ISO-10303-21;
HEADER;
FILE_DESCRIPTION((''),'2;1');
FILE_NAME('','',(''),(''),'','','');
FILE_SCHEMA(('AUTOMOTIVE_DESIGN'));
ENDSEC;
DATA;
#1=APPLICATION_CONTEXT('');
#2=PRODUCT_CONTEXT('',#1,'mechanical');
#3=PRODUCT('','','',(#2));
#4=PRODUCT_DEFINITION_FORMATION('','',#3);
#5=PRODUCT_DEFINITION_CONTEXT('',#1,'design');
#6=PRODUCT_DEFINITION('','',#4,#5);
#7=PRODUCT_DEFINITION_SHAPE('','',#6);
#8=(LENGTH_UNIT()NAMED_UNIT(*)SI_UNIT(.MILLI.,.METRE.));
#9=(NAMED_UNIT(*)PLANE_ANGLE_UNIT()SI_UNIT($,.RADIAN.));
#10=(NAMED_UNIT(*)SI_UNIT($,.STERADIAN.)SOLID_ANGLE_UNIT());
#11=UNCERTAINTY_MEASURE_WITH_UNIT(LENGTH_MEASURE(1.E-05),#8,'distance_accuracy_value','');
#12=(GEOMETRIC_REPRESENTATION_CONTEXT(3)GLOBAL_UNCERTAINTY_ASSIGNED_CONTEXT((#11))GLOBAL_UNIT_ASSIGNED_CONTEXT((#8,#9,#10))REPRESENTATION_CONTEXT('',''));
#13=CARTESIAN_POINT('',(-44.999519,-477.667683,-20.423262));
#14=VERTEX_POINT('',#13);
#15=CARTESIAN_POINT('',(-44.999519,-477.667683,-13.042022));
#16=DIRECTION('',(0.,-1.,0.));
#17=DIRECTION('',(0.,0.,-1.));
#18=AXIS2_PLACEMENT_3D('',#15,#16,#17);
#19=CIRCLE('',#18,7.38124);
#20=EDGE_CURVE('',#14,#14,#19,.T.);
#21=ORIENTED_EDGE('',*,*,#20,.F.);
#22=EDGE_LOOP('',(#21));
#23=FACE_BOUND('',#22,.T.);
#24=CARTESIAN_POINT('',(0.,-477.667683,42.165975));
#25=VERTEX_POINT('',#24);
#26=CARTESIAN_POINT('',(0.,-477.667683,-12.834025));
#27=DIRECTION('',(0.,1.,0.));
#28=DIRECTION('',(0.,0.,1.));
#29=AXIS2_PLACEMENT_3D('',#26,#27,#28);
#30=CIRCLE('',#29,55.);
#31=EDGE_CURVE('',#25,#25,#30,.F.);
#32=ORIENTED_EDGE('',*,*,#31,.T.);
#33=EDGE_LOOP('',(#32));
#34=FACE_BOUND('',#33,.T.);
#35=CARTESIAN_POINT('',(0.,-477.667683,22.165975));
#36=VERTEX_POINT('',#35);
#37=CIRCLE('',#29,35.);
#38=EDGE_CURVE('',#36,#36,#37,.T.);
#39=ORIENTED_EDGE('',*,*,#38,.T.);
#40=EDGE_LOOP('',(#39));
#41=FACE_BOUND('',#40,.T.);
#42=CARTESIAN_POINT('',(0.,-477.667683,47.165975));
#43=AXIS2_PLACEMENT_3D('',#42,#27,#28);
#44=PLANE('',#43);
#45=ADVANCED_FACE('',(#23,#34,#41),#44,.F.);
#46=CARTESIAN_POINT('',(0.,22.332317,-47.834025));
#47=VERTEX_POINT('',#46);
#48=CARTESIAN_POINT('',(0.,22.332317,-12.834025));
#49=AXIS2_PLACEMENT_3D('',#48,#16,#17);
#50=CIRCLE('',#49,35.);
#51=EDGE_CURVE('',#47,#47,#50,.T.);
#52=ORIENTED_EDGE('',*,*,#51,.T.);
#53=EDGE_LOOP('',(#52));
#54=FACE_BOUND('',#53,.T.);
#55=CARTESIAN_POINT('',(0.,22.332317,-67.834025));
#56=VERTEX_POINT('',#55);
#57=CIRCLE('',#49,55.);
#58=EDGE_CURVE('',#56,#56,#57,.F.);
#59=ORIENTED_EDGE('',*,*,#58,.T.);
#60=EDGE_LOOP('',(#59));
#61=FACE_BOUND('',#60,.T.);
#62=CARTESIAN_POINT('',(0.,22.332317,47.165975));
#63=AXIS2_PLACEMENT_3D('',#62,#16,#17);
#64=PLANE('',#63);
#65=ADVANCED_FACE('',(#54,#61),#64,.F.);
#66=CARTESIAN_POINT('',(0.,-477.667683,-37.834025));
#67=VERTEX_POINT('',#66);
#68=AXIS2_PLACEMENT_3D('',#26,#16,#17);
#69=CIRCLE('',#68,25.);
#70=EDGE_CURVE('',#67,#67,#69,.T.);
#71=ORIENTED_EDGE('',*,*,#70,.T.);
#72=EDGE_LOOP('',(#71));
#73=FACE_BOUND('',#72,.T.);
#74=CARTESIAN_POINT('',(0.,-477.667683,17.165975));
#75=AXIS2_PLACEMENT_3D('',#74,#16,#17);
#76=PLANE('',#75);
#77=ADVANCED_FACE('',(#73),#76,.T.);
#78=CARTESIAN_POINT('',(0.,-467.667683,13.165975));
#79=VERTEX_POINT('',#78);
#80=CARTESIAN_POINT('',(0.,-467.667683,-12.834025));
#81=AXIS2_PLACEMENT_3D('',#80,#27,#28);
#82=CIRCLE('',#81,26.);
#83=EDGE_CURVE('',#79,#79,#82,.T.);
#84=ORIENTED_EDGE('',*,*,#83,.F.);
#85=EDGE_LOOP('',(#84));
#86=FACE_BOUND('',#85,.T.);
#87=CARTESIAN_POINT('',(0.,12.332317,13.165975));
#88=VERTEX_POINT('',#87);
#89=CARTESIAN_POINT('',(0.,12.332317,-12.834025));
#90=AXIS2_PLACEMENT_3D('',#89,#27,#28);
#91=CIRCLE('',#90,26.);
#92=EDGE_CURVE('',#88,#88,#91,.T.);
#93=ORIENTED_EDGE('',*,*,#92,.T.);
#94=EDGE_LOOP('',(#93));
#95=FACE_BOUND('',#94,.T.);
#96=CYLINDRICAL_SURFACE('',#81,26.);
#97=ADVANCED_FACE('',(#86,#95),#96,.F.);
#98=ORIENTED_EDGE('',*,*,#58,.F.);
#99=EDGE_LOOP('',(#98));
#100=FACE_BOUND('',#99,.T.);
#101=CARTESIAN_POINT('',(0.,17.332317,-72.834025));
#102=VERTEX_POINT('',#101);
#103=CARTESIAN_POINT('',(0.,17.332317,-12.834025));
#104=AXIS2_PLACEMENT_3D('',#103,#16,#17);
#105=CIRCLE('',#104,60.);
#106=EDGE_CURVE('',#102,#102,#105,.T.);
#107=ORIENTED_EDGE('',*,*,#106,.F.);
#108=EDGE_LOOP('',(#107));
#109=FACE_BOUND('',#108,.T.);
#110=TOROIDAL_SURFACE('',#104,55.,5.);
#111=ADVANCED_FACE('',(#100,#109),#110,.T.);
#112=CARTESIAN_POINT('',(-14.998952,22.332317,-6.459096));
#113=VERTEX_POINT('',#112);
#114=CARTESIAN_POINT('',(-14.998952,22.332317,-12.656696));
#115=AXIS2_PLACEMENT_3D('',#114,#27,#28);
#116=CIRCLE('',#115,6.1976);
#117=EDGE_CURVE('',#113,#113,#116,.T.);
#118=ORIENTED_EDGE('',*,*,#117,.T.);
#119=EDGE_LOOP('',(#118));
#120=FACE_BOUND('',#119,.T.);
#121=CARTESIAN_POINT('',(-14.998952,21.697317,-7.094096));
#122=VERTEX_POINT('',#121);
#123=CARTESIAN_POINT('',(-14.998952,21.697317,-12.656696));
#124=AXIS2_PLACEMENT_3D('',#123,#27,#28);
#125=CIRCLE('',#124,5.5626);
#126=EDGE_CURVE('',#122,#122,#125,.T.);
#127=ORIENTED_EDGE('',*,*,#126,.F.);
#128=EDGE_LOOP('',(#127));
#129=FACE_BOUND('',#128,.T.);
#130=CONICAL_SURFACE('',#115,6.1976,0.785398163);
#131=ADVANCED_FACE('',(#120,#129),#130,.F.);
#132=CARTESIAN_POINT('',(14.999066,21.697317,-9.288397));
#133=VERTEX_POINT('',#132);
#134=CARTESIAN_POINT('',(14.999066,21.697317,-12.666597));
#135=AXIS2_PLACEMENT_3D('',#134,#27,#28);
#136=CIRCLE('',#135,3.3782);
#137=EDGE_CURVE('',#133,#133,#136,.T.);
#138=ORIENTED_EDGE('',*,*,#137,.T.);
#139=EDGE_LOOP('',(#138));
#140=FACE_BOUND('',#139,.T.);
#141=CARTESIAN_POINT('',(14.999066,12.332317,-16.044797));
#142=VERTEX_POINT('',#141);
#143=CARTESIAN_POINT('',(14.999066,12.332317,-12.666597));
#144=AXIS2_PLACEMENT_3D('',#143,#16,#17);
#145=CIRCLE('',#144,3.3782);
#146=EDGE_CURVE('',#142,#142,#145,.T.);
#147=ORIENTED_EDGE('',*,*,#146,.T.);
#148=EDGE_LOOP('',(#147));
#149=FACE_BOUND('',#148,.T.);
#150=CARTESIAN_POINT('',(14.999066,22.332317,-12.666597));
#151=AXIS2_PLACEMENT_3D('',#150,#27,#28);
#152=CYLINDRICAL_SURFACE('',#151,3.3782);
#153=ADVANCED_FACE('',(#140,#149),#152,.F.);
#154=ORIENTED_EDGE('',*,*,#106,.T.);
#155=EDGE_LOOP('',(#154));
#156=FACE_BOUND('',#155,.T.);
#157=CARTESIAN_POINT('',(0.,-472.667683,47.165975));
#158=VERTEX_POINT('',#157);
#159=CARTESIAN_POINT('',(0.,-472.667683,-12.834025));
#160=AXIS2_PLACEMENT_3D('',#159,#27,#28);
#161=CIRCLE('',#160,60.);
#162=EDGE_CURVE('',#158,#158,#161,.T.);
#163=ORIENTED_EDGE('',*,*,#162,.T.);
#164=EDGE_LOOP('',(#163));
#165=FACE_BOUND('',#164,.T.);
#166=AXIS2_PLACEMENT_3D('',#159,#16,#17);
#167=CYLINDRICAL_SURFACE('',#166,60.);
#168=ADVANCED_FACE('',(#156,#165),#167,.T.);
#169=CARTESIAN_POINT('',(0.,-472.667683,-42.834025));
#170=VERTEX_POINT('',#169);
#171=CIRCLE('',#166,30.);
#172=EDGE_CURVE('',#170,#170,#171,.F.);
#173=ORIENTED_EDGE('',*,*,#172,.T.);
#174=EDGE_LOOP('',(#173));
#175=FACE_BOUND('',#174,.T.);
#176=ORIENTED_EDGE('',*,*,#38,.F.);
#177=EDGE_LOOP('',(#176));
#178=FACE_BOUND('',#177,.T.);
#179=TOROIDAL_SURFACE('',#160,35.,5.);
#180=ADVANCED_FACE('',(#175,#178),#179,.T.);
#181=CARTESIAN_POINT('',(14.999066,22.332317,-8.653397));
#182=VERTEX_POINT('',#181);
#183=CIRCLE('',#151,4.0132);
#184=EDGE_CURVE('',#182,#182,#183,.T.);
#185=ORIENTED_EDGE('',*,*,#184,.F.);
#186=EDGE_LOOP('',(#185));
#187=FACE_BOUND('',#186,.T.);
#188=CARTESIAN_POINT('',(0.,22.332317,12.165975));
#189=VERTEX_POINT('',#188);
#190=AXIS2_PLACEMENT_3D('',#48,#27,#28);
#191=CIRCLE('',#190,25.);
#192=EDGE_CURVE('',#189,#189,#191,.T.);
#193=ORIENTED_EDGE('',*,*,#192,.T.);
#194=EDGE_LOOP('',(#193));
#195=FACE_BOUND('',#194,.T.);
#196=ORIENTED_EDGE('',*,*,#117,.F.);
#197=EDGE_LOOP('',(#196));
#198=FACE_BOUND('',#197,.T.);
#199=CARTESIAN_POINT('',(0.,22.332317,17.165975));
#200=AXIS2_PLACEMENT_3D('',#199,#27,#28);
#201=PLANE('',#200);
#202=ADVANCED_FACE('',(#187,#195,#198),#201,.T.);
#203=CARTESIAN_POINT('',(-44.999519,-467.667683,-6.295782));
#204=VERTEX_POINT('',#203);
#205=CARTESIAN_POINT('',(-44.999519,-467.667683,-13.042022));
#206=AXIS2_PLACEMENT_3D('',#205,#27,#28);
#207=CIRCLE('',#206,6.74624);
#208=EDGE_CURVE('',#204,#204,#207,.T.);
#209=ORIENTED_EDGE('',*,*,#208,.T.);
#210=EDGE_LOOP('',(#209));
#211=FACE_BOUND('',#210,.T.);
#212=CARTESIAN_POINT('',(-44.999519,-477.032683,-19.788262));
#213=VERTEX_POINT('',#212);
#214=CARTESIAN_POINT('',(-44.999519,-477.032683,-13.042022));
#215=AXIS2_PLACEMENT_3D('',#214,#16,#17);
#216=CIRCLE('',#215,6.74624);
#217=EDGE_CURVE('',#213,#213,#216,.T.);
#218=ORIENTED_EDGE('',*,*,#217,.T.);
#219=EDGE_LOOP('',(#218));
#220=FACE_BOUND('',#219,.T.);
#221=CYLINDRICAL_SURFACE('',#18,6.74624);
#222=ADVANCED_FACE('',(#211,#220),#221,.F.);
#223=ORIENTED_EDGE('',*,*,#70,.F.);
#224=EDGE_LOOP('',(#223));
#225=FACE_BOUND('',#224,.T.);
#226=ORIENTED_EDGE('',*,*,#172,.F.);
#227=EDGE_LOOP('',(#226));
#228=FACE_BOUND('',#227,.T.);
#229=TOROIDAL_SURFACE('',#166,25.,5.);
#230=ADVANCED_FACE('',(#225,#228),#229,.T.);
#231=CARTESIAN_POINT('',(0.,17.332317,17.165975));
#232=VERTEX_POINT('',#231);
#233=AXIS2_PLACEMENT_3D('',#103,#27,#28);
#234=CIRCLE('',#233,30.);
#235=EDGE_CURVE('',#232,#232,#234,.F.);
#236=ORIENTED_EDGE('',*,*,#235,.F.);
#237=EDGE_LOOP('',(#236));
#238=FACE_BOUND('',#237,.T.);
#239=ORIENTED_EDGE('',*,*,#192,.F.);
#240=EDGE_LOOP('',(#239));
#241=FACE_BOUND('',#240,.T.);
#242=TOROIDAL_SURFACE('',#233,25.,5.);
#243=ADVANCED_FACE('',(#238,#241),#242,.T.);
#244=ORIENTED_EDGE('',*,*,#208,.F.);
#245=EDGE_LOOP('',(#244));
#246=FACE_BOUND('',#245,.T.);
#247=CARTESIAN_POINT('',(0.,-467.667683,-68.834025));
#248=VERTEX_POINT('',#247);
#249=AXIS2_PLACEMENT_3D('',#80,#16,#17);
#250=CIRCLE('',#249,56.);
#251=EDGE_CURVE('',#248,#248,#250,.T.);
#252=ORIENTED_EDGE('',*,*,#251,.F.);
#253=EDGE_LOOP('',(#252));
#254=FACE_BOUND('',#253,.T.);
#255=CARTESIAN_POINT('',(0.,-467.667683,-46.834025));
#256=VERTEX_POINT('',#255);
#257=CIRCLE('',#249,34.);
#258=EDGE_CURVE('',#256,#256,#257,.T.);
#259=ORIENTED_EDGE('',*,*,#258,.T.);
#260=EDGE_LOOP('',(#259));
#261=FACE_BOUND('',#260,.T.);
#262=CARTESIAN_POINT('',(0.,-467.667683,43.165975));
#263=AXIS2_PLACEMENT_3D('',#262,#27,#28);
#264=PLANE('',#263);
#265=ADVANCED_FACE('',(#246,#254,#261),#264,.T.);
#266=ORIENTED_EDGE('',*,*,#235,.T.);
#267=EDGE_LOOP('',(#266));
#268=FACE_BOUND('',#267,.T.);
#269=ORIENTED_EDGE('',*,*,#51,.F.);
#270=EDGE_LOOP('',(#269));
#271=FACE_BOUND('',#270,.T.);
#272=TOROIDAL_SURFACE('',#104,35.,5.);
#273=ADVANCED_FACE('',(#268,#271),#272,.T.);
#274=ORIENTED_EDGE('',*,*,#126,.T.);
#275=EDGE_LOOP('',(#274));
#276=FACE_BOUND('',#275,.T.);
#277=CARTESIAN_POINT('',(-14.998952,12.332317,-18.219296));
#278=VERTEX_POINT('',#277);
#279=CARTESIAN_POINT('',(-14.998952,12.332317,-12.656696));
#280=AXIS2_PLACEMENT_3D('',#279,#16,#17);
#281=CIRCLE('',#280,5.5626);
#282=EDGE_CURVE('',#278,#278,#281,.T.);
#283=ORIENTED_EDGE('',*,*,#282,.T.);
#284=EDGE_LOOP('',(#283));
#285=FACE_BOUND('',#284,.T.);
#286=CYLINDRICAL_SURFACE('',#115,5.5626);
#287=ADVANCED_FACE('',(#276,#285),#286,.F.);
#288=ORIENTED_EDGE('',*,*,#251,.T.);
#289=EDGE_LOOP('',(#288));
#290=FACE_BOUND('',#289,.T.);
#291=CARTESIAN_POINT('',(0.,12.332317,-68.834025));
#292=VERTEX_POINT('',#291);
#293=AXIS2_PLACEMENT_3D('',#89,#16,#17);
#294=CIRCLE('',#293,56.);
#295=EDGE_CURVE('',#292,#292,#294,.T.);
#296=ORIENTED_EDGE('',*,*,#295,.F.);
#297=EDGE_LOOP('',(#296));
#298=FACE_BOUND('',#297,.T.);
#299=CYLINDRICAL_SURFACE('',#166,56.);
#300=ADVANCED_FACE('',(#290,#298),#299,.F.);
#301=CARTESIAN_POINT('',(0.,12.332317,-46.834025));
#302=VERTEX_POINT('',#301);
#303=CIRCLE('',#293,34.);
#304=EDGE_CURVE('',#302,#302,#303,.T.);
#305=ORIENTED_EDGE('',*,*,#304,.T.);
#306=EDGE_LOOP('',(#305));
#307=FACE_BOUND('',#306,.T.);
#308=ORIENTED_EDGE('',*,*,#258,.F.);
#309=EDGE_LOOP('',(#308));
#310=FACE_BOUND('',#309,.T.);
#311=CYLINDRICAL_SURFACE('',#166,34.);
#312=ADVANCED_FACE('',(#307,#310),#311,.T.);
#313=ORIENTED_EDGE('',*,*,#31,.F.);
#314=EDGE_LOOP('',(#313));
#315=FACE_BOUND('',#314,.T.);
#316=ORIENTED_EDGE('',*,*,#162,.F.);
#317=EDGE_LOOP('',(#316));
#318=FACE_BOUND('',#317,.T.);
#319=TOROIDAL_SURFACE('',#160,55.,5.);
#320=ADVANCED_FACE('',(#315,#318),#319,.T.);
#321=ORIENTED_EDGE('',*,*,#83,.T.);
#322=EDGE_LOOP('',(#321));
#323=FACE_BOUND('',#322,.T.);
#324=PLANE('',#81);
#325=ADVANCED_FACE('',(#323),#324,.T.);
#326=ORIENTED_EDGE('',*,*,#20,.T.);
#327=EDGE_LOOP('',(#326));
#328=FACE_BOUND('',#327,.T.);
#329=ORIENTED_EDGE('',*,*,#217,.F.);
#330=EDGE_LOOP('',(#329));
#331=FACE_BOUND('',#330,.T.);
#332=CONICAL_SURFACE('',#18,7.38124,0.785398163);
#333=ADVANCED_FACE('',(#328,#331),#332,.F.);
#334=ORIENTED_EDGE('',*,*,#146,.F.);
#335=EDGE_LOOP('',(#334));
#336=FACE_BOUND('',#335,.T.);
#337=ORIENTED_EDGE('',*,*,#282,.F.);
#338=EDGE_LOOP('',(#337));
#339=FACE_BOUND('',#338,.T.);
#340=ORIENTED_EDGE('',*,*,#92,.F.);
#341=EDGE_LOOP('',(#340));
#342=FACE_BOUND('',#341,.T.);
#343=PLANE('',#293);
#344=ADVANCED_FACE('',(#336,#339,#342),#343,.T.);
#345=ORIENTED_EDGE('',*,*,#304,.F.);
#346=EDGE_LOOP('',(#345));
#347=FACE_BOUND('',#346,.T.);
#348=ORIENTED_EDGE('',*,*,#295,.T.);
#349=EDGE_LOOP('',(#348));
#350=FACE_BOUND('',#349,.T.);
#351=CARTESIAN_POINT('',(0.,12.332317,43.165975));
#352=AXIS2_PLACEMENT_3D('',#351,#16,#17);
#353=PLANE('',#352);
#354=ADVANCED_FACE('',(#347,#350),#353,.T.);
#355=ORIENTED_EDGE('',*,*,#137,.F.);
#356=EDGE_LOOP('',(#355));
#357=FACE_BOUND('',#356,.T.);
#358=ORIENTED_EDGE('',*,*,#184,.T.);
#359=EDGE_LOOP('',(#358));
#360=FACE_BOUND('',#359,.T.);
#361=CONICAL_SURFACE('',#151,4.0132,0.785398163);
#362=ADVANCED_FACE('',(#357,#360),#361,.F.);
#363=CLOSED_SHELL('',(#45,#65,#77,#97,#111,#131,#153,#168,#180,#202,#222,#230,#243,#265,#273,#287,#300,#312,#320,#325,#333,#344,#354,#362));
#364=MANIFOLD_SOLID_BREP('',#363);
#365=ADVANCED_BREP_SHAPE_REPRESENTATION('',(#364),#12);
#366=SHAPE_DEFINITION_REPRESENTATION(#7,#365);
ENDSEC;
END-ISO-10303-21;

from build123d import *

# Parameters (mm, degrees)
CONG_1_R                                            = 5
CONG_2_R                                            = 5
ESQUISSE3_W                                         = 30
ESQUISSE3_H                                         = 500
ESQUISSE3_W_2                                       = 22
ESQUISSE3_H_2                                       = 480
CONG_3_R                                            = 5
CONG_4_R                                            = 5
PER_AGE_POUR_TUYAU_POUR_TROU_TARAUD_1_4_D           = 11.1252
PER_AGE_POUR_TUYAU_POUR_TROU_TARAUD_1_4_DEPTH       = 10
PER_AGE_POUR_TUYAU_POUR_TROU_TARAUD_1_4_CSINK_D     = 12.3952
PER_AGE_POUR_TUYAU_POUR_TROU_TARAUD_1_4_CSINK_ANGLE = 90
D_GAGEMENT_1_41_D                                   = 6.7564
D_GAGEMENT_1_41_DEPTH                               = 10
D_GAGEMENT_1_41_CSINK_D                             = 8.0264
D_GAGEMENT_1_41_CSINK_ANGLE                         = 90
D_GAGEMENT_1_21_D                                   = 13.49248
D_GAGEMENT_1_21_DEPTH                               = 10
D_GAGEMENT_1_21_CSINK_D                             = 14.76248
D_GAGEMENT_1_21_CSINK_ANGLE                         = 90


with BuildPart() as part:
    # Esquisse2 → Révolution1 (revolve)
    with BuildSketch(Plane(origin=(0, 0, 0), x_dir=(0, 0, -1), z_dir=(1, 0, 0))):
        Polygon((12.834024955, -467.667682927), (12.834024955, -477.667682927), (-17.165975045, -477.667682927), (-17.165975045, 22.332317073), (12.834024955, 22.332317073), (12.834024955, 12.332317073), (-13.165975045, 12.332317073), (-13.165975045, -467.667682927), align=None)
    revolve(axis=Axis((0, -467.667682927, -12.834024955), (0, -1, 0)))

    # Congé1
    cong_1_edges = [part.edges().sort_by_distance(p)[0] for p in [
        (0, 22.332317073, -42.834024955),
    ]]
    fillet(cong_1_edges, radius=CONG_1_R)

    # Congé2
    cong_2_edges = [part.edges().sort_by_distance(p)[0] for p in [
        (0, -477.667682927, -42.834024955),
    ]]
    fillet(cong_2_edges, radius=CONG_2_R)

    # Esquisse3 → Révolution2 (revolve)
    with BuildSketch(Plane(origin=(0, 0, 0), x_dir=(0, 0, -1), z_dir=(1, 0, 0)), mode=Mode.PRIVATE) as r_volution2_sk:
        with Locations((-32.165975045, -227.667682927)):
            Rectangle(ESQUISSE3_W, ESQUISSE3_H)
        with Locations((-32.165975045, -227.667682927)):
            Rectangle(ESQUISSE3_W_2, ESQUISSE3_H_2, mode=Mode.SUBTRACT)
    revolve(r_volution2_sk.sketch.rotate(Axis((0, -472.667682927, -12.834024955), (0, 1, 0)), 180), axis=Axis((0, -472.667682927, -12.834024955), (0, 1, 0)))

    # Congé3
    cong_3_edges = [part.edges().sort_by_distance(p)[0] for p in [
        (0, 22.332317073, 47.165975045),
        (0, 22.332317073, 17.165975045),
    ]]
    fillet(cong_3_edges, radius=CONG_3_R - 0.0001)  # a hair under: the kernel refuses the full size

    # Congé4
    cong_4_edges = [part.edges().sort_by_distance(p)[0] for p in [
        (0, -477.667682927, 17.165975045),
        (0, -477.667682927, 47.165975045),
    ]]
    fillet(cong_4_edges, radius=CONG_4_R - 0.0001)  # a hair under: the kernel refuses the full size

    # Perçage pour tuyau pour trou taraudé 1/41
    with Locations(Plane(origin=(-14.998951778, 22.332317073, -12.656696011), x_dir=(0, 0, 1), z_dir=(0, 1, 0))):
        with Locations((0, 0)):
            CounterSinkHole(PER_AGE_POUR_TUYAU_POUR_TROU_TARAUD_1_4_D / 2, PER_AGE_POUR_TUYAU_POUR_TROU_TARAUD_1_4_CSINK_D / 2, depth=PER_AGE_POUR_TUYAU_POUR_TROU_TARAUD_1_4_DEPTH, counter_sink_angle=PER_AGE_POUR_TUYAU_POUR_TROU_TARAUD_1_4_CSINK_ANGLE)

    # Dégagement 1/41
    with Locations(Plane(origin=(14.99906557, 22.332317073, -12.666597303), x_dir=(0, 0, 1), z_dir=(0, 1, 0))):
        with Locations((0, 0)):
            CounterSinkHole(D_GAGEMENT_1_41_D / 2, D_GAGEMENT_1_41_CSINK_D / 2, depth=D_GAGEMENT_1_41_DEPTH, counter_sink_angle=D_GAGEMENT_1_41_CSINK_ANGLE)

    # Dégagement 1/21
    with Locations(Plane(origin=(-44.999519302, -477.667682927, -13.042021564), x_dir=(0, 0, -1), z_dir=(0, -1, 0))):
        with Locations((0, 0)):
            CounterSinkHole(D_GAGEMENT_1_21_D / 2, D_GAGEMENT_1_21_CSINK_D / 2, depth=D_GAGEMENT_1_21_DEPTH, counter_sink_angle=D_GAGEMENT_1_21_CSINK_ANGLE)


solid = part.part
